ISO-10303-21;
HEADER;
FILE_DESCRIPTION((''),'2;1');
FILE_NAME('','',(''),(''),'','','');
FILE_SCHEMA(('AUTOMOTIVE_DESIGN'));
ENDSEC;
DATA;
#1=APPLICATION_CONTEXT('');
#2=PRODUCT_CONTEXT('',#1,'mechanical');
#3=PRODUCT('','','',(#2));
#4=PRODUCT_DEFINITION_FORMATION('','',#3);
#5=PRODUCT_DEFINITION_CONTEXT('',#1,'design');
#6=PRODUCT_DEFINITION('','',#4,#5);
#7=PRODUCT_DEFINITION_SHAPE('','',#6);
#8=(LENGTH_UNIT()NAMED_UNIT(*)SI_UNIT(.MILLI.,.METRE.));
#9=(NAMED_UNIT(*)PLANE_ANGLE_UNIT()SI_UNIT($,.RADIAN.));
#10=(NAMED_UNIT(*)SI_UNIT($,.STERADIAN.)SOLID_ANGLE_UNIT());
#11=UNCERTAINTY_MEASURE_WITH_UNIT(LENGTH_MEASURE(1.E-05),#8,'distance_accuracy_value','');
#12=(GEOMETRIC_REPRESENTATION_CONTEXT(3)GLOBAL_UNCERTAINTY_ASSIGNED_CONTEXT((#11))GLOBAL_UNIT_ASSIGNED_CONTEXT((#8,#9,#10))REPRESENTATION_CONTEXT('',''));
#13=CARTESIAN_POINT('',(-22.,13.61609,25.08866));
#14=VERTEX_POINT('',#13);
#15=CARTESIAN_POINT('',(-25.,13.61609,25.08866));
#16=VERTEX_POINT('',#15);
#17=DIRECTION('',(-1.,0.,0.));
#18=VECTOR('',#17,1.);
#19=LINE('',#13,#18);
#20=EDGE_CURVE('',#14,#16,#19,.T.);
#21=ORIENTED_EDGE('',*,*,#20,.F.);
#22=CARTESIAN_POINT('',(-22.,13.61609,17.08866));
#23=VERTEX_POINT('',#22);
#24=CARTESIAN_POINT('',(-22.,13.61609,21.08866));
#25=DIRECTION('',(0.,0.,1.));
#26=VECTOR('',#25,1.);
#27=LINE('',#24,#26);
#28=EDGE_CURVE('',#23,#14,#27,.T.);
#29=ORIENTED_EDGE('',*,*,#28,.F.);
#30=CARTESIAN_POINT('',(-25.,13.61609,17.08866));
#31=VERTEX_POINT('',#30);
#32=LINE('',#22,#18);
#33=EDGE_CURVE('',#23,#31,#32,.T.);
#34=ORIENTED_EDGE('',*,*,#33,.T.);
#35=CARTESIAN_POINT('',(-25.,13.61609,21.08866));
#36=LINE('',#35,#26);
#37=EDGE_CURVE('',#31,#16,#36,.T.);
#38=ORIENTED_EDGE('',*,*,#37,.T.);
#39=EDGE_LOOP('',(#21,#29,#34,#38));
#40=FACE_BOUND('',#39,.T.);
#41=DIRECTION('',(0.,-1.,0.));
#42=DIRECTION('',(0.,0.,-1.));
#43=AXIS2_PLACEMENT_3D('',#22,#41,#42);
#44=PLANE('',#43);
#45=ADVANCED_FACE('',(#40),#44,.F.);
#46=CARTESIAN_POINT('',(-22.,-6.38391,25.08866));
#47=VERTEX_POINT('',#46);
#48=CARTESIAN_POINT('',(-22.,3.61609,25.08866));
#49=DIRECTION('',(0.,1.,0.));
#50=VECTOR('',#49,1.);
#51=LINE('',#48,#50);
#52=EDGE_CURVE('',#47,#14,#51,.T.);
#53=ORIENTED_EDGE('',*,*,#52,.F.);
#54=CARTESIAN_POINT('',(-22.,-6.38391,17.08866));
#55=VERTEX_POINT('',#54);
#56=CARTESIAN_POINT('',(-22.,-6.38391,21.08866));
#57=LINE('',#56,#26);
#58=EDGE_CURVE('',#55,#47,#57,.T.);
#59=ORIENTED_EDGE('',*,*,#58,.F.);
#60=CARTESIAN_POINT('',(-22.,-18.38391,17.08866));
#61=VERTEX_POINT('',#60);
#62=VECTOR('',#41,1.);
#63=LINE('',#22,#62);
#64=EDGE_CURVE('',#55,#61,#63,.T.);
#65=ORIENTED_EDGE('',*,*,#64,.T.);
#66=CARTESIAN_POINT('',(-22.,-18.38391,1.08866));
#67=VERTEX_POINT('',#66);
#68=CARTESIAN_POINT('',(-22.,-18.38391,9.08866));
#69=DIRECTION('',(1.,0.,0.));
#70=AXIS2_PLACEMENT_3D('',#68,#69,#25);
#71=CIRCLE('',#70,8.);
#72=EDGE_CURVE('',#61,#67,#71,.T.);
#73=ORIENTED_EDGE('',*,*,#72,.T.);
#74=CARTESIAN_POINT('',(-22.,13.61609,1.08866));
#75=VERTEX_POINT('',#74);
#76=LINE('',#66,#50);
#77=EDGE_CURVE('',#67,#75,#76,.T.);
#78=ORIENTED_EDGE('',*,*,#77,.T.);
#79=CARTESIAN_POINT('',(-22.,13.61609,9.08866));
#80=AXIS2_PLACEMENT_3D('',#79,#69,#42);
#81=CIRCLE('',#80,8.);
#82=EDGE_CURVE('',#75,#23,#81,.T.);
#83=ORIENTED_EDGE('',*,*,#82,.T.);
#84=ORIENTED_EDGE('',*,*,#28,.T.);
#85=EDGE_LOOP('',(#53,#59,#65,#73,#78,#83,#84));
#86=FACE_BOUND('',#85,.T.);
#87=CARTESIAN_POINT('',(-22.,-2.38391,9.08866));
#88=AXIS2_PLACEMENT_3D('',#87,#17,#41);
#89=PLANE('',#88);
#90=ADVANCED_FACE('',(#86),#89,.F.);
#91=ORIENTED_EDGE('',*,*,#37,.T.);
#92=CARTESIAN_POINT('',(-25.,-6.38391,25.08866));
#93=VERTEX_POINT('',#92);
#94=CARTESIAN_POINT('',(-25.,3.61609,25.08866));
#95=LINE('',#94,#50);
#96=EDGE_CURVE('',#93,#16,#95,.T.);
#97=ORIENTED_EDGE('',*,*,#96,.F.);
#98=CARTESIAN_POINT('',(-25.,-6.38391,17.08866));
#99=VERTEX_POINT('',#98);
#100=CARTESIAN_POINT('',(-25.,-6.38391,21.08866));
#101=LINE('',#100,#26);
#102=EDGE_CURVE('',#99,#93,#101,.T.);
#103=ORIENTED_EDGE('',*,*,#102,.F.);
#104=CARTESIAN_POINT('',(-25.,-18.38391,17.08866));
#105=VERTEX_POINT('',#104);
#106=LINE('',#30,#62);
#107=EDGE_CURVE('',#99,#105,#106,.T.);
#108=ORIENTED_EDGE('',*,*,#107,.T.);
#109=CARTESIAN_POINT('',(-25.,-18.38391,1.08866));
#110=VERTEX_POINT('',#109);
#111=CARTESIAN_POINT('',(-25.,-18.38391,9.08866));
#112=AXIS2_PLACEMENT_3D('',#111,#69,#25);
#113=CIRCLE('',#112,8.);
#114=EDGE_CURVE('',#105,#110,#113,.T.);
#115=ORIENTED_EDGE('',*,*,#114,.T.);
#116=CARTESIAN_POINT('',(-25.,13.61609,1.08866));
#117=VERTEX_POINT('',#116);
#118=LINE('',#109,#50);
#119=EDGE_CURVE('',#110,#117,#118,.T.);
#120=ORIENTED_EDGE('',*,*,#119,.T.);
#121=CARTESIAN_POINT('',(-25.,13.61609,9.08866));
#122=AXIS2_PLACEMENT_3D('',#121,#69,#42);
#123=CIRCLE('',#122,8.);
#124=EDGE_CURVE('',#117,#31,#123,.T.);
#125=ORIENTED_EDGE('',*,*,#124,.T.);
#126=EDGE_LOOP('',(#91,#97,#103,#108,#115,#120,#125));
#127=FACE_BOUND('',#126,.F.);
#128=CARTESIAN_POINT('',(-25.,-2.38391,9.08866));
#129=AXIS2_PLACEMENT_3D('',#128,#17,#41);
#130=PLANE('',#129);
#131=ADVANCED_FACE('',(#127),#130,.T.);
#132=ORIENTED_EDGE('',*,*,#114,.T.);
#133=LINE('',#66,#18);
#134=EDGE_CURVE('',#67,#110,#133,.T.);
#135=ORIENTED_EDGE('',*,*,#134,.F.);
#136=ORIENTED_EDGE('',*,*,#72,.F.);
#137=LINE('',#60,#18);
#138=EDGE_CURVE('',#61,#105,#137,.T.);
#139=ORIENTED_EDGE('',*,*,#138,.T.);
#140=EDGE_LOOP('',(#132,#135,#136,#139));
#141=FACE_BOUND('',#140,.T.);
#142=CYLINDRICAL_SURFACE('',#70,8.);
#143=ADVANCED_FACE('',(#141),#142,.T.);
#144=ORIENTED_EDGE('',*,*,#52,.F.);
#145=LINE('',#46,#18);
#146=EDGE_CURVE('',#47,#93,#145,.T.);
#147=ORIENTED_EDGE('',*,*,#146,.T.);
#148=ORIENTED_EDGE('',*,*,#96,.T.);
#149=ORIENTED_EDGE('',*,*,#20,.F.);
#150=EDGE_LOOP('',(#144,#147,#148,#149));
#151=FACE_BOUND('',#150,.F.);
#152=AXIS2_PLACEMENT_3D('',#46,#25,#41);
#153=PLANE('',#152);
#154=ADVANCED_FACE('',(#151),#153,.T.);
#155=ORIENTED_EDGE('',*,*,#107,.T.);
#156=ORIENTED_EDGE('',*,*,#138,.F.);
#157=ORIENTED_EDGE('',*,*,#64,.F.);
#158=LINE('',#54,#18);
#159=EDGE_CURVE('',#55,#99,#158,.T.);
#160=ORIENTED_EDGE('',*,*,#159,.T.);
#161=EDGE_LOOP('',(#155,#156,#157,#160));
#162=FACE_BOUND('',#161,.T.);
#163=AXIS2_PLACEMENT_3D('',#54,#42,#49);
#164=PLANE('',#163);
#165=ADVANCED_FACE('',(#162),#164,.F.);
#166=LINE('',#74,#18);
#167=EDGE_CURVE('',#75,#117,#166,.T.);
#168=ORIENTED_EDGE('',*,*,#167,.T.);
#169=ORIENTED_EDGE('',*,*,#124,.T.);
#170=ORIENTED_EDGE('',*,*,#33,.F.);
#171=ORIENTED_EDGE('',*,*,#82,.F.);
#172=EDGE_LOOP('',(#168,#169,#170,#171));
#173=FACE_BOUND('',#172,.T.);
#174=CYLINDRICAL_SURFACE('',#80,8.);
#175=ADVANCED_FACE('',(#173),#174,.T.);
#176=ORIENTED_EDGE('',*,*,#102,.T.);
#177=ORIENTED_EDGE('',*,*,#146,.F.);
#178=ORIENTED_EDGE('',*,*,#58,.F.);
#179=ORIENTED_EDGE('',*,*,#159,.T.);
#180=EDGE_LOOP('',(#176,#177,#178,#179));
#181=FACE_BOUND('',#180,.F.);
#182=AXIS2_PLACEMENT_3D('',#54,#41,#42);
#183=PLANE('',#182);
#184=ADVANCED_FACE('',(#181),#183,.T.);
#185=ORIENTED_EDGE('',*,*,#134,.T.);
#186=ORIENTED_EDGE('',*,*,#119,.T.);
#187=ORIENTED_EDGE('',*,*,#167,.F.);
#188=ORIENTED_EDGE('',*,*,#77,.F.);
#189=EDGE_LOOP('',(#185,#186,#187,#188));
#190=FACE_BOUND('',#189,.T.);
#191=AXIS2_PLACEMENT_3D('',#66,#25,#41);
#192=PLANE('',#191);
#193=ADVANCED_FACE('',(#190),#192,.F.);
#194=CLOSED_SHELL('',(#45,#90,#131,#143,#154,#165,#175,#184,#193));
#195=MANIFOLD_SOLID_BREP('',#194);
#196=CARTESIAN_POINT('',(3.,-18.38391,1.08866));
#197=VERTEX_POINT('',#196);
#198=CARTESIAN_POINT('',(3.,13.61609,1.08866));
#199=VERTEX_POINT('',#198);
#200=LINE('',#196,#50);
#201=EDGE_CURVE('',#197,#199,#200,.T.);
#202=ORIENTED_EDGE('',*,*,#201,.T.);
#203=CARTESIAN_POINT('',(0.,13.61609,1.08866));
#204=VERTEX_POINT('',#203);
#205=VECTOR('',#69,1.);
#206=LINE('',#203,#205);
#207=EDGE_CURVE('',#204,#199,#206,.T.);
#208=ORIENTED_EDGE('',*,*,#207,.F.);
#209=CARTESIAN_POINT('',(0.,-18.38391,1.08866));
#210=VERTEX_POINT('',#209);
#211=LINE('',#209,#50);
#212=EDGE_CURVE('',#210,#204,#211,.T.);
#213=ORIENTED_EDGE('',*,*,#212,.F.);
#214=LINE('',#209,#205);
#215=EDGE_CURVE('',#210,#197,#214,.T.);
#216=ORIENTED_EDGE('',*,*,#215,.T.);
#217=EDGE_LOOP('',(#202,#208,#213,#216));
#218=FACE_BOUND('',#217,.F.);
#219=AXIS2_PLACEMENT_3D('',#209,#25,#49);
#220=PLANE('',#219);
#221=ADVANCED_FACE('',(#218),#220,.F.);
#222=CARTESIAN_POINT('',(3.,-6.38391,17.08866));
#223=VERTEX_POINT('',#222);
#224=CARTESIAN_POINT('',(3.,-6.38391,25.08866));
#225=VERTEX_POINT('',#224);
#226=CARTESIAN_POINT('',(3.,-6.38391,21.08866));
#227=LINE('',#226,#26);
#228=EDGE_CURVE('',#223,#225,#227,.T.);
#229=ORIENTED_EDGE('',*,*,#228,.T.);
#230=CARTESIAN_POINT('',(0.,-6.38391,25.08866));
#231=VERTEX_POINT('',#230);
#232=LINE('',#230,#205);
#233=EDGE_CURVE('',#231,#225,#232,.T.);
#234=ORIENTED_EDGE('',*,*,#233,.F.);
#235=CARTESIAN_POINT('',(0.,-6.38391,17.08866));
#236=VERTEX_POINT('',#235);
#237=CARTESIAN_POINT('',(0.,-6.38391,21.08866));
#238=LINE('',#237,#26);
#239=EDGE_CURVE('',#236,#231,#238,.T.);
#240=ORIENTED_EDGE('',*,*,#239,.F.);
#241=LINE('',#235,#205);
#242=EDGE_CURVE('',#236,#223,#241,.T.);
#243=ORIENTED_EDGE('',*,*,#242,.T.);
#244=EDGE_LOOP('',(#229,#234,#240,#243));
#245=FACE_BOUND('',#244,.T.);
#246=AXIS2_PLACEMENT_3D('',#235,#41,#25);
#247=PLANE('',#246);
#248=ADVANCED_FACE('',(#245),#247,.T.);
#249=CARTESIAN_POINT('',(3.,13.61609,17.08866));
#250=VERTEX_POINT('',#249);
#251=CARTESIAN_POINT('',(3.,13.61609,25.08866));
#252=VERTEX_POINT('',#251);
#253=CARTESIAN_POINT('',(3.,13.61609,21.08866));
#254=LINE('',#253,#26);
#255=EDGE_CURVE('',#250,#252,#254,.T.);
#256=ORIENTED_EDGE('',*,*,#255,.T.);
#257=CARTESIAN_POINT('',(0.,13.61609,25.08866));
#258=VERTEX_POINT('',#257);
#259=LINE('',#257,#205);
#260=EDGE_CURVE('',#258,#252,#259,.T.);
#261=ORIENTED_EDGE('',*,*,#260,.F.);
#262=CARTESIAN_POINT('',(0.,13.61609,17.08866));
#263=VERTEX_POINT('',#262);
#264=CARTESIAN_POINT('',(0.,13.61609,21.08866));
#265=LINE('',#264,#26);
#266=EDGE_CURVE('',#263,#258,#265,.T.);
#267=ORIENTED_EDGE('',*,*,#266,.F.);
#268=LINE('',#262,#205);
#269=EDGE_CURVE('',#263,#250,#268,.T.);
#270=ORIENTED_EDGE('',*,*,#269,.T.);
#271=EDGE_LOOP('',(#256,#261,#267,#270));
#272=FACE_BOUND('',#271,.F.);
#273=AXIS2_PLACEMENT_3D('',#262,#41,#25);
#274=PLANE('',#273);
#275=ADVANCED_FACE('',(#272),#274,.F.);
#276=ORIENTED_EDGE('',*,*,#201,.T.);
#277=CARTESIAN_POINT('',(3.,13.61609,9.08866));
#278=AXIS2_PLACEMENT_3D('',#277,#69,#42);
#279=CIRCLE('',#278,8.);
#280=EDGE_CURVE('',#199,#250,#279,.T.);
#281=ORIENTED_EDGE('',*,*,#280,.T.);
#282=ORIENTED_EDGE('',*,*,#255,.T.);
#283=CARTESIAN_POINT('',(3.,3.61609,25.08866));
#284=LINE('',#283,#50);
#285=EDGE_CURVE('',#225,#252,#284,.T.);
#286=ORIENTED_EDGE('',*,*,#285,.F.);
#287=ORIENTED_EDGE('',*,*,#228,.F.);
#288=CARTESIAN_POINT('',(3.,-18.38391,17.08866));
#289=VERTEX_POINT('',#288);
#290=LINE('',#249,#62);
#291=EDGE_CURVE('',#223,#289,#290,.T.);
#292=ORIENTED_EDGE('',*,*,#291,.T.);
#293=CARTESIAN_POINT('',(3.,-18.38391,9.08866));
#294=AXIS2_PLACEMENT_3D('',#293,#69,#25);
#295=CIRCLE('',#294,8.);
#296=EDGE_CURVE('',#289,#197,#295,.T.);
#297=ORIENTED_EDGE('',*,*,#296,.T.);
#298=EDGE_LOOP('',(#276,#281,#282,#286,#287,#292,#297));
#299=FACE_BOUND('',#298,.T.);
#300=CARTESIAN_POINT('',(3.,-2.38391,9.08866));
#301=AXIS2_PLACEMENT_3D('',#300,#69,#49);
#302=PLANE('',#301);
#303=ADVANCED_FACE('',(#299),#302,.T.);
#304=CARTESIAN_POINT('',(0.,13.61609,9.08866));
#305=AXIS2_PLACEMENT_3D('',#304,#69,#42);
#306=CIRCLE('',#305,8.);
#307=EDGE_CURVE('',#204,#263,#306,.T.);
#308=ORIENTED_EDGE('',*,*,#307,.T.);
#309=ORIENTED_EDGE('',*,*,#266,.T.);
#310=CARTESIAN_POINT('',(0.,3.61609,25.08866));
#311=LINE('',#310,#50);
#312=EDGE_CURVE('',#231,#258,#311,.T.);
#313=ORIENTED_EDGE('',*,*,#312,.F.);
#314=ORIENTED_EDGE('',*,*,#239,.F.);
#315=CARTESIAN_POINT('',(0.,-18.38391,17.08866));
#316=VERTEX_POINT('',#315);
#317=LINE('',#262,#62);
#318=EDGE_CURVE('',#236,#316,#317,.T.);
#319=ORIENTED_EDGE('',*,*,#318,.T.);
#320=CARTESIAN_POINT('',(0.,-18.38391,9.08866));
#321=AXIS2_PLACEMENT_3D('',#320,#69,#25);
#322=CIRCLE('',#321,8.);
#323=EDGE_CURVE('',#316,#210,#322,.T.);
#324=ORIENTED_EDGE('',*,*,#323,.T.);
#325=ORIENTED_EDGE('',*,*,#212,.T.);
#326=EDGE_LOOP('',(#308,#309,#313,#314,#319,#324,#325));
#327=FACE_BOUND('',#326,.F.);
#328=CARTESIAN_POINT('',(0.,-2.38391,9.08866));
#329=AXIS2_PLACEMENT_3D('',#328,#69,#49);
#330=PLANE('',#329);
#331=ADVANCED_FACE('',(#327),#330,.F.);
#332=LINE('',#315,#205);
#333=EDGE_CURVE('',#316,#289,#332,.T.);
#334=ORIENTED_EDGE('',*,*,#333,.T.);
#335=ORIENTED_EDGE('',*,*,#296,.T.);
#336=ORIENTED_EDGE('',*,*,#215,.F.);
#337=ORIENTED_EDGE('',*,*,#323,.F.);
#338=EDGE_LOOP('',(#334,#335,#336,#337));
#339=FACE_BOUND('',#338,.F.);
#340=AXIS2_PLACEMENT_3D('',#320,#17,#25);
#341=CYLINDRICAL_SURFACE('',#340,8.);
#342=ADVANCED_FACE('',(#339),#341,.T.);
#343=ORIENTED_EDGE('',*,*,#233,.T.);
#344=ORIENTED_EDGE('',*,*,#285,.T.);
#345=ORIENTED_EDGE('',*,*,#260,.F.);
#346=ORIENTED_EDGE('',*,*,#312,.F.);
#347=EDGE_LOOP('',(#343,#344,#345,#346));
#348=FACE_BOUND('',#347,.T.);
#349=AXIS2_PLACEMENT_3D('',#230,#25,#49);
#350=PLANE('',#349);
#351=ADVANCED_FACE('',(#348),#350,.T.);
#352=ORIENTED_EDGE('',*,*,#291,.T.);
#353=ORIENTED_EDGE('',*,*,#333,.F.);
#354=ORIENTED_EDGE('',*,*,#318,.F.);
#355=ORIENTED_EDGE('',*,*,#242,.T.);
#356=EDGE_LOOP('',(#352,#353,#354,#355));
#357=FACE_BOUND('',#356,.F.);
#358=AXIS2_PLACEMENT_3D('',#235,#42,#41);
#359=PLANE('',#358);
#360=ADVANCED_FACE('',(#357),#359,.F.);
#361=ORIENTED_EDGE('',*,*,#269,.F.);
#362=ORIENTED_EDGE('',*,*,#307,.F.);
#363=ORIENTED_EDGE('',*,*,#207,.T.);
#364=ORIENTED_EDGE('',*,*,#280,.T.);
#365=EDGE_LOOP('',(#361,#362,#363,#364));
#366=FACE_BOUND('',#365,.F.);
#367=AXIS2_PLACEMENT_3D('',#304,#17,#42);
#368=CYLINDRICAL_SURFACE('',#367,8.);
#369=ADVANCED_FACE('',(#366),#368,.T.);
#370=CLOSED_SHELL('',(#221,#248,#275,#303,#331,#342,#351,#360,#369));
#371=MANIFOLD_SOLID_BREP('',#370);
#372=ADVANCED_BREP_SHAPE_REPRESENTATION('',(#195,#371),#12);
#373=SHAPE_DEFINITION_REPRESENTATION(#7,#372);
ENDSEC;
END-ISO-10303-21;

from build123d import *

# Parameters (mm, degrees)
F0_R     = 3
F0_W     = 20
F0_H     = 8
F1_DEPTH = 3


# Not quite as in the source:
# - a feature names something its author has since deleted; it is built from what else it names


with BuildPart() as f1:
    # F0 (on Right) → F1 (new body)
    with BuildSketch(Plane.YZ):
        with BuildLine():
            ThreePointArc((-18.3839101195, 17.088659659), (-26.3839101195, 9.088659659), (-18.3839101195, 1.088659659))
            Line((-18.3839101195, 1.088659659), (13.6160898805, 1.088659659))
            ThreePointArc((13.6160898805, 1.088659659), (21.6160898805, 9.088659659), (13.6160898805, 17.088659659))
            Line((13.6160898805, 17.088659659), (-6.3839101195, 17.088659659))
            Line((-6.3839101195, 17.088659659), (-18.3839101195, 17.088659659))
        make_face()
        with Locations((-18.3839101195, 9.088659659)):
            Circle(F0_R, mode=Mode.SUBTRACT)
        with Locations((13.6160898805, 9.088659659)):
            Circle(F0_R, mode=Mode.SUBTRACT)
        with Locations((3.6160898805, 21.088659659)):
            Rectangle(F0_W, F0_H)
        with Locations((-18.3839101195, 9.088659659)):
            Circle(F0_R)
        with Locations((13.6160898805, 9.088659659)):
            Circle(F0_R)
    extrude(amount=F1_DEPTH)


with BuildPart() as f4_1:
    # F4: instance of F1
    add(f1.part.mirror(Plane(origin=(-11, 3.6160898805, 23.588659659), x_dir=(0, -1, 0), z_dir=(1, 0, 0))))


solid = Compound([f1.part, f4_1.part])
